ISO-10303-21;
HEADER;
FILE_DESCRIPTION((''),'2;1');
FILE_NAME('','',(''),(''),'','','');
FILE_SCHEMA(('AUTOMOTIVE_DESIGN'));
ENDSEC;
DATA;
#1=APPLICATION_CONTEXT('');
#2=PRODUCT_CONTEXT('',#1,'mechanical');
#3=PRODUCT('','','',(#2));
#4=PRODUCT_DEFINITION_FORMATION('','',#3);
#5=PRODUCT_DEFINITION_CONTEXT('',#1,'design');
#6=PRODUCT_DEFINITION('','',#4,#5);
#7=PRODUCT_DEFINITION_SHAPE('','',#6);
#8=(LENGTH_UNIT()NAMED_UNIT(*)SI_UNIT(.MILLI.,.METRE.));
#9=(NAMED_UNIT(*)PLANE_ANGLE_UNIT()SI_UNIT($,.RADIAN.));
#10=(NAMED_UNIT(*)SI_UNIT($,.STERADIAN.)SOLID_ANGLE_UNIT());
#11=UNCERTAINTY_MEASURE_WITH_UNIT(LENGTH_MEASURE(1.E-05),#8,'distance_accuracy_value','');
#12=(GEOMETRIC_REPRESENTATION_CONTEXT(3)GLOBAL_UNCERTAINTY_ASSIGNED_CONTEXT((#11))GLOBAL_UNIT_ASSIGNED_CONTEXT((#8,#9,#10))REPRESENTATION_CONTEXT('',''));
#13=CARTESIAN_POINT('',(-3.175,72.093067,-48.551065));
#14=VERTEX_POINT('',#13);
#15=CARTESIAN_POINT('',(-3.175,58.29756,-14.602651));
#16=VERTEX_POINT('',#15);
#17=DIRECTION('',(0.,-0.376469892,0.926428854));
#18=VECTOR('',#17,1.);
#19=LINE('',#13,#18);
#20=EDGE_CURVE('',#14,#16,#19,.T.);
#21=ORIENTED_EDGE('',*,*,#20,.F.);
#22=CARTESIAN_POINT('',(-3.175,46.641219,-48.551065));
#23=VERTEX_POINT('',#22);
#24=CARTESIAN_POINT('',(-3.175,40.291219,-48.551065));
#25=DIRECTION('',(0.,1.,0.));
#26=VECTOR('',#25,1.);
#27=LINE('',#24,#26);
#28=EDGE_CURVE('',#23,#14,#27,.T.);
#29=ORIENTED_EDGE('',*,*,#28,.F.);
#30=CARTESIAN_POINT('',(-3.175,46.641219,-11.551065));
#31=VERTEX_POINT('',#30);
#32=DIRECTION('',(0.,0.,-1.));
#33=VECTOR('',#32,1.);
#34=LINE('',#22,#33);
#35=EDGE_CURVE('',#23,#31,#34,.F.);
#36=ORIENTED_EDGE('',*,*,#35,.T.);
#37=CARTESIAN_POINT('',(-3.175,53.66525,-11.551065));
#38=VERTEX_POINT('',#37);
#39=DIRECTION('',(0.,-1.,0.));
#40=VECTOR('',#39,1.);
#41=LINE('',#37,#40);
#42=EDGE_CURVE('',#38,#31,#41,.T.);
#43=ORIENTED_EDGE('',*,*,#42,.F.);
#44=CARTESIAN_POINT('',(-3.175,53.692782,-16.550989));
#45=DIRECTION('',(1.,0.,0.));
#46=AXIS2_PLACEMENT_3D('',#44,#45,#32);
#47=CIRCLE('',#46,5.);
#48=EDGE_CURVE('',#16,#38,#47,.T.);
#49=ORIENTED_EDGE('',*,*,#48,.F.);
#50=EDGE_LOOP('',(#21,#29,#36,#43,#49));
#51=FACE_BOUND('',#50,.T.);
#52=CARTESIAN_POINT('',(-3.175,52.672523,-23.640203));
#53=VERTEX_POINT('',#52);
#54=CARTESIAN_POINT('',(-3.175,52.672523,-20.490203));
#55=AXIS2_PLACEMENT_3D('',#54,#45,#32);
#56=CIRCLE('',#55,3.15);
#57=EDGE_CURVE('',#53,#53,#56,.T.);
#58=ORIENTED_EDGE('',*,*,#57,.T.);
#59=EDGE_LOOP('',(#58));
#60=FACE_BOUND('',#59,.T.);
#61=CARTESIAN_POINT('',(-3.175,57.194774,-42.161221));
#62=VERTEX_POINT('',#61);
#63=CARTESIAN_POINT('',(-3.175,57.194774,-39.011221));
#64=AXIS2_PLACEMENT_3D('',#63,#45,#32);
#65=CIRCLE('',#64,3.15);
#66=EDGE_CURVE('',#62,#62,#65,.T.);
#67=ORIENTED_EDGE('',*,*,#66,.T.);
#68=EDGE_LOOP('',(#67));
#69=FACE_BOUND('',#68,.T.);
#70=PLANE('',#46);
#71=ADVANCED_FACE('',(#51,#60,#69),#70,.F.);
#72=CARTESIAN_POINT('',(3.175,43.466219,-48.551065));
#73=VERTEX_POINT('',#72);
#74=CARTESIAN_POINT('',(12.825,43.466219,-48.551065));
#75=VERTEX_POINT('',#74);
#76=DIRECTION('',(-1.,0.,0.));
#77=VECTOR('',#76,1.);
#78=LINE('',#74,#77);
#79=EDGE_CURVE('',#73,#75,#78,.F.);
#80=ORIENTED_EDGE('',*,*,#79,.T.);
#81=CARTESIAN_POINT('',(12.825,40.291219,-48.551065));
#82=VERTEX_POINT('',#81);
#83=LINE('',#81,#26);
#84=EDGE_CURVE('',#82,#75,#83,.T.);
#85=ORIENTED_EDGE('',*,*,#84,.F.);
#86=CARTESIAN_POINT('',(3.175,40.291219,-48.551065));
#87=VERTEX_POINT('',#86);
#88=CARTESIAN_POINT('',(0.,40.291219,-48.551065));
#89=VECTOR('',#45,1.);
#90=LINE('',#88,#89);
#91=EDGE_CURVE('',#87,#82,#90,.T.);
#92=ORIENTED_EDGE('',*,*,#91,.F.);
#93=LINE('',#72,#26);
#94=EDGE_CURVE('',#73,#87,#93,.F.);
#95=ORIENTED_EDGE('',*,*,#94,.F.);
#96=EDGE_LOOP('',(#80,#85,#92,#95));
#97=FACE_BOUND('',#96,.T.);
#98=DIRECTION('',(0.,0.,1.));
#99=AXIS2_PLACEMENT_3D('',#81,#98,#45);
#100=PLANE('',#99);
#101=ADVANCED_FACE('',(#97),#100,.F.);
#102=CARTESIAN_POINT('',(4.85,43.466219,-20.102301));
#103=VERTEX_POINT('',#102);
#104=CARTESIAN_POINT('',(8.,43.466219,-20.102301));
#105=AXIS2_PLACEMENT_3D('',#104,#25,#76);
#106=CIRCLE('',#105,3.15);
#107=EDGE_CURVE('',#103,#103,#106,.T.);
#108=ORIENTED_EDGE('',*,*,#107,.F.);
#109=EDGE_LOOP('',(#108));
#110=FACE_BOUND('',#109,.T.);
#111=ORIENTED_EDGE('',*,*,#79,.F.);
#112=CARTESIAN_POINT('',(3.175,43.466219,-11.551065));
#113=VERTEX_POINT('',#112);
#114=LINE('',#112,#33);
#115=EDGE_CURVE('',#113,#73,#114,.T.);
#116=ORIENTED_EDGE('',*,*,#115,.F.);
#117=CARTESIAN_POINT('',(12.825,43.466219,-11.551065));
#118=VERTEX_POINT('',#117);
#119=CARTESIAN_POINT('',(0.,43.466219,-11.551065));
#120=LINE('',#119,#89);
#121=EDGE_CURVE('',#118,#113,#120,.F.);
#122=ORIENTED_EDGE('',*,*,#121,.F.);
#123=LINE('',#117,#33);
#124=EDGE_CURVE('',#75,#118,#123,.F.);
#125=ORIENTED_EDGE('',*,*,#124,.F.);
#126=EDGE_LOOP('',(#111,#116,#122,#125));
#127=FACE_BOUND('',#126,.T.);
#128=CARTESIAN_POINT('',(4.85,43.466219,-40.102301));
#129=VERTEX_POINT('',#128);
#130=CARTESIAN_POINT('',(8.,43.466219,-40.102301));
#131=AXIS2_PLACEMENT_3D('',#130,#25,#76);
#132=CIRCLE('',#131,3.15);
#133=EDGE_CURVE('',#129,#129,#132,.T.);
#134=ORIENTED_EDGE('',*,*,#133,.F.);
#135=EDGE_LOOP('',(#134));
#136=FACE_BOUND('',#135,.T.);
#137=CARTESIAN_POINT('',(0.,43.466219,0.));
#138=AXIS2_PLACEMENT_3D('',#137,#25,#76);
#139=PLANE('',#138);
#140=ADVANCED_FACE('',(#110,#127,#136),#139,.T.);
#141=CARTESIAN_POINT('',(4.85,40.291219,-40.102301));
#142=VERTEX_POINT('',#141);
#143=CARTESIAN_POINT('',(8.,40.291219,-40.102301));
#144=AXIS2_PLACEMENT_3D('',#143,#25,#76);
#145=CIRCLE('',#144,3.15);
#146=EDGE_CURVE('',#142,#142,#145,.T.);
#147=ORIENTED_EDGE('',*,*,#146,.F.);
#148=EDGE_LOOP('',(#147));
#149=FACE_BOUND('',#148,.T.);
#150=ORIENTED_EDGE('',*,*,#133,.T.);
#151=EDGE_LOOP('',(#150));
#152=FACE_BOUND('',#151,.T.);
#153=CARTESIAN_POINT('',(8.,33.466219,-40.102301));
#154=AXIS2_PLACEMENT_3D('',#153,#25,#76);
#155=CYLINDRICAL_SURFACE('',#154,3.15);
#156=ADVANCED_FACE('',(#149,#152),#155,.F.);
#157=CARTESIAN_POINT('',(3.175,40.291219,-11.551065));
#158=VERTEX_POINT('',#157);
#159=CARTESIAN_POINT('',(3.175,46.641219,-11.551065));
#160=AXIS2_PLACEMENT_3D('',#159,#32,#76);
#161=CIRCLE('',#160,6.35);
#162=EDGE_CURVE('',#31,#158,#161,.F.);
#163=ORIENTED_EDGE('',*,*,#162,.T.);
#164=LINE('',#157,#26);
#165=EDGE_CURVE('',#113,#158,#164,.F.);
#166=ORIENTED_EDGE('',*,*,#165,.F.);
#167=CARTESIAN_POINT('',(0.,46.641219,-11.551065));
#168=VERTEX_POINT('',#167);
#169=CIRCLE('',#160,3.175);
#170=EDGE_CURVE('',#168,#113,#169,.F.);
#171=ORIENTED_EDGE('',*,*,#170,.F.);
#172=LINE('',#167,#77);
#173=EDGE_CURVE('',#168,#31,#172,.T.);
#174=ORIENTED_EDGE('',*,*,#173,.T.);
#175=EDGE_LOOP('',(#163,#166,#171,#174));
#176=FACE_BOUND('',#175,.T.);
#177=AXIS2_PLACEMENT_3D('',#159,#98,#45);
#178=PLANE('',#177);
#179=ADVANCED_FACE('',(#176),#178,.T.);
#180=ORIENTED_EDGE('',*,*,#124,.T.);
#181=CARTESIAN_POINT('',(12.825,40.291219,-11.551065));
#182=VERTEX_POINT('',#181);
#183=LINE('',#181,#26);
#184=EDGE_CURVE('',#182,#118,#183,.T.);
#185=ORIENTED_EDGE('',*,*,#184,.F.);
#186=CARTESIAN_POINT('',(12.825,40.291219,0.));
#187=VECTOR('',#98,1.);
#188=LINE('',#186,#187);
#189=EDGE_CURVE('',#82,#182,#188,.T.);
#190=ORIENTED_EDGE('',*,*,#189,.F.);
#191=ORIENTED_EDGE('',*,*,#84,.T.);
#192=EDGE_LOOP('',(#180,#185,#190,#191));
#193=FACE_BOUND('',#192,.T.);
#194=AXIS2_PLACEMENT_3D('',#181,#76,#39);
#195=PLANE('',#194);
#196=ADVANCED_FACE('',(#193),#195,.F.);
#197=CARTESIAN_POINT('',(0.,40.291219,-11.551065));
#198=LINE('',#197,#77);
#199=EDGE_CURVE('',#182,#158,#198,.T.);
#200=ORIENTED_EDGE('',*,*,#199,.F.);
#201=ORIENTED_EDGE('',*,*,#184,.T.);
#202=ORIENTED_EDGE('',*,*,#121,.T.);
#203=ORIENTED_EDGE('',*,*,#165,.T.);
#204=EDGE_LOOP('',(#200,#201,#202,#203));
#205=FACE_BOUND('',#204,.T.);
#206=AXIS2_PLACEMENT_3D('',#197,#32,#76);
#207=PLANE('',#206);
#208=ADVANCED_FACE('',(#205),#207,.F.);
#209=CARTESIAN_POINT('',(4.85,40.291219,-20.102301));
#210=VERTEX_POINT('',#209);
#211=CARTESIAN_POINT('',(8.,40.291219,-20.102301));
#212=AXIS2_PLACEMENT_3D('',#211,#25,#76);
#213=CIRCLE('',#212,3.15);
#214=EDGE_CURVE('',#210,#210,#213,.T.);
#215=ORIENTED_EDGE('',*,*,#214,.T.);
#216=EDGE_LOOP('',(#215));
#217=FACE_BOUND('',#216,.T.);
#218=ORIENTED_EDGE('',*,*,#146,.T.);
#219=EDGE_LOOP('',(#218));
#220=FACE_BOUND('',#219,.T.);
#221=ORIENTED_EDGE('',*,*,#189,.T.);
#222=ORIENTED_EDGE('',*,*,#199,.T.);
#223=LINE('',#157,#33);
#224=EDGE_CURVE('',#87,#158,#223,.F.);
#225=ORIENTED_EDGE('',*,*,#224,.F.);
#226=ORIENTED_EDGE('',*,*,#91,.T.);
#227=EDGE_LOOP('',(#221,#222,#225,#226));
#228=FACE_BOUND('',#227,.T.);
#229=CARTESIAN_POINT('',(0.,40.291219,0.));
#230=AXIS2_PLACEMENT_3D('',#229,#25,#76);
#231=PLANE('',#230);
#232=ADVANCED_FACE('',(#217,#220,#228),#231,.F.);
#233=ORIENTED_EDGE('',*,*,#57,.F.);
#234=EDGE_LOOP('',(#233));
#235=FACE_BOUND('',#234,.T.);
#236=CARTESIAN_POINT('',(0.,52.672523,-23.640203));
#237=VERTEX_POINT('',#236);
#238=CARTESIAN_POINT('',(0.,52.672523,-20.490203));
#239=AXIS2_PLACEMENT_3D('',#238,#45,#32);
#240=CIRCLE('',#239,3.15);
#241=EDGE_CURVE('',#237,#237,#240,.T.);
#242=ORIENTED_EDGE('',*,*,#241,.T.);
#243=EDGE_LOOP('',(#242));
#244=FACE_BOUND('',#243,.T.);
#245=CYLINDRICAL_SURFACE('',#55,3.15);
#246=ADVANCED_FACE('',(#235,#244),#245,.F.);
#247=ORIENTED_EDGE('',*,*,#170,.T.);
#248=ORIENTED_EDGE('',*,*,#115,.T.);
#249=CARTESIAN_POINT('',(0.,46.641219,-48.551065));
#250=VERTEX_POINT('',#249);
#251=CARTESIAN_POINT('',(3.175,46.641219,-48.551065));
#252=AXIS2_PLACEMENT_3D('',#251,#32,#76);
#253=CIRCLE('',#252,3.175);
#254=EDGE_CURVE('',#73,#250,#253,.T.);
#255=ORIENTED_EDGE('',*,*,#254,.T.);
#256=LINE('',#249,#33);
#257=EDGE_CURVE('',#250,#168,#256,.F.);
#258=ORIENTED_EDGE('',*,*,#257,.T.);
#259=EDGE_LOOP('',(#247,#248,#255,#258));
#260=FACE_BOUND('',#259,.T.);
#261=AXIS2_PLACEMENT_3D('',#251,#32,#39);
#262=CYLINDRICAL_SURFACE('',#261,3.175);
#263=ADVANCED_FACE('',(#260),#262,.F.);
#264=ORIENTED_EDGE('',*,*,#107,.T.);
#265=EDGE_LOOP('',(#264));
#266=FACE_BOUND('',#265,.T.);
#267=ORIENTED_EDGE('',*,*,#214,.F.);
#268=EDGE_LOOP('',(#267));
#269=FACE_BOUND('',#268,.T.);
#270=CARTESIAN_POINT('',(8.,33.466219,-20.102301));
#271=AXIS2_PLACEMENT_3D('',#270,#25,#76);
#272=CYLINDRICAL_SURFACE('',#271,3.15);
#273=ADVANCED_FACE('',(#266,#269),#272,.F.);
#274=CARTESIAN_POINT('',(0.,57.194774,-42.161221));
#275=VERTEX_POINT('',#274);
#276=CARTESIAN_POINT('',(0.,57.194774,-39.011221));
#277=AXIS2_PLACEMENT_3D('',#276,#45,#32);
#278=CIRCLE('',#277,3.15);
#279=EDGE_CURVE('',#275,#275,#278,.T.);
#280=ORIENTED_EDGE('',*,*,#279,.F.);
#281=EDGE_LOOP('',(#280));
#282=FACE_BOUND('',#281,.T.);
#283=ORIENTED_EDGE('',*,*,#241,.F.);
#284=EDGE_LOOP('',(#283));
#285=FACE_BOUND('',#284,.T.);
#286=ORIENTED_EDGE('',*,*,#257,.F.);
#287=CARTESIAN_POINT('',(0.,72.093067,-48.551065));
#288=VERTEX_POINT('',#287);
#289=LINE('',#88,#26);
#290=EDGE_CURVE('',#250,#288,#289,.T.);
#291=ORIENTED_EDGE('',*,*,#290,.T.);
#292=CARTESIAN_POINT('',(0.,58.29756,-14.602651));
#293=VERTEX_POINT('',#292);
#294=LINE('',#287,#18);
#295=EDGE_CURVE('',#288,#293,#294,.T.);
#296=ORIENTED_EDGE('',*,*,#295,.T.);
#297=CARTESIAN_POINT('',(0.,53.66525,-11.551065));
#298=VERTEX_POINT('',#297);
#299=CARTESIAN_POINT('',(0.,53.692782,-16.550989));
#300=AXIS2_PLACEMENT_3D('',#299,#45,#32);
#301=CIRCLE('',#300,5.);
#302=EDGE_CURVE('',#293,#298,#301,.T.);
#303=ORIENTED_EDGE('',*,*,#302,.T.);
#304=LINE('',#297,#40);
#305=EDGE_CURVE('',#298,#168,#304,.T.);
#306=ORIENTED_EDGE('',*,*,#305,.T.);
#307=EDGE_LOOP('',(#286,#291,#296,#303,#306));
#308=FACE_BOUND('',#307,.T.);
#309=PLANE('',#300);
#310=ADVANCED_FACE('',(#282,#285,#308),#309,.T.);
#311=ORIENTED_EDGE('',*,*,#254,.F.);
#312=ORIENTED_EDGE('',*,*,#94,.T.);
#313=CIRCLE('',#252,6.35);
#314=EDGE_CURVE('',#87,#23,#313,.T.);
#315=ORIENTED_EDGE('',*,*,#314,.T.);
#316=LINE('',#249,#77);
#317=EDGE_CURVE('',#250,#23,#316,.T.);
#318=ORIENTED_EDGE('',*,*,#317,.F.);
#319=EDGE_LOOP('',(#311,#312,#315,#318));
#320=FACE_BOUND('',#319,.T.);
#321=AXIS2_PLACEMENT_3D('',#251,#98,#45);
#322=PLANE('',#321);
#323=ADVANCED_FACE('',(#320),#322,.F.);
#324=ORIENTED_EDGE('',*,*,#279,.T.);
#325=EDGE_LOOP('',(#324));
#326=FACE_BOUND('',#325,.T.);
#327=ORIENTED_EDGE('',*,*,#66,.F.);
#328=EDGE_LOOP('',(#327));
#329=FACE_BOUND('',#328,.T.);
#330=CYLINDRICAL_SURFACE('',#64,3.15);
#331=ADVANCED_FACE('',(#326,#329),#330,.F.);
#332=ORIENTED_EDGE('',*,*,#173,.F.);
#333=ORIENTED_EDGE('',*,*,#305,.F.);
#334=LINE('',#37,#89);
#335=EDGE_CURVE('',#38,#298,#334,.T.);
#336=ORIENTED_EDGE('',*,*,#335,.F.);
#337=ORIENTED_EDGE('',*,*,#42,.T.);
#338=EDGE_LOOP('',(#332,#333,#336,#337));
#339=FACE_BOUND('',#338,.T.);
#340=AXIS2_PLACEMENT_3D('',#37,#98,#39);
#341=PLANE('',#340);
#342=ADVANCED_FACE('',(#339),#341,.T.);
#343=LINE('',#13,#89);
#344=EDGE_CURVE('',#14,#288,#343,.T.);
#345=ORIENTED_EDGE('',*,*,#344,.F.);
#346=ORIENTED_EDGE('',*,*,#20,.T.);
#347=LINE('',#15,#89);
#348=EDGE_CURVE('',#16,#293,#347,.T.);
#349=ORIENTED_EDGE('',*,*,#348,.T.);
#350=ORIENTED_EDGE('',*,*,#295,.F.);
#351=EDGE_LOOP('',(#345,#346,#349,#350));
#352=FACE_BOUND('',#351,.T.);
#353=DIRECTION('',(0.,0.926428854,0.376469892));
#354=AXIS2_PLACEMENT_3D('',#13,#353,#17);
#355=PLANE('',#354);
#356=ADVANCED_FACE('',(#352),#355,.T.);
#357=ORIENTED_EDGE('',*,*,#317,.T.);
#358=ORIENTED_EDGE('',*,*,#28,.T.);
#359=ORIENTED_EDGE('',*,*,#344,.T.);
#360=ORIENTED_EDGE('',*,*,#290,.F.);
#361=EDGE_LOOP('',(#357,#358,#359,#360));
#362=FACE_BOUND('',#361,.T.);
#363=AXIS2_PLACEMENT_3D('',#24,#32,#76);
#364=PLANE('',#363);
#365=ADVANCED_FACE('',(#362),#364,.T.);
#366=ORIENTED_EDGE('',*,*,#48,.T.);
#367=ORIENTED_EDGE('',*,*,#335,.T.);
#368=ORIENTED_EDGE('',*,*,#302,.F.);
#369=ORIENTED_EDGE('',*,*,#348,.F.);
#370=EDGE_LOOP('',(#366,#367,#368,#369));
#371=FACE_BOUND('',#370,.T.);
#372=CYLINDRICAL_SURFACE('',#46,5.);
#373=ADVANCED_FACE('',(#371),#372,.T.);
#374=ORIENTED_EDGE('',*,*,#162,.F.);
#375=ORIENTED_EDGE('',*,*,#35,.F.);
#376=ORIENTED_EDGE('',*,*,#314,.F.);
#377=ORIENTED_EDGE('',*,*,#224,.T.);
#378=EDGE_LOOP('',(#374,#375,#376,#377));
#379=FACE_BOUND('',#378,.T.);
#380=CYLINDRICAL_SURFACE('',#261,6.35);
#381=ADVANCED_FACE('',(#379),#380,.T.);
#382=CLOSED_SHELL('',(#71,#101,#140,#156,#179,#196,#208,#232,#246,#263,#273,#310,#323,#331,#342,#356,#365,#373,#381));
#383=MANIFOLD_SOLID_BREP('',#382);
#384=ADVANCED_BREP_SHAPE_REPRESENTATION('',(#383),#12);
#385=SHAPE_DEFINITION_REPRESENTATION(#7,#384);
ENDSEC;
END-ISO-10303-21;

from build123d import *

# Parameters (mm, degrees)
SKETCH2_R                    = 3.15
BASE_FLANGE1_DEPTH           = 3.175
EDGE_FLANGE1_STRIP_W         = 19.05
EDGE_FLANGE1_STRIP_H         = 3.175
EDGE_FLANGE1_STRIP_CUT_DEPTH = 37
EDGE_FLANGE1_DEPTH           = 37
SKETCH10_R                   = 3.15
CUT_EXTRUDE1_DEPTH           = 10


# Sheet-metal steps are written as plain solids
with BuildPart() as part:
    # Sketch2 → Base-Flange1 (new body)
    with BuildSketch(Plane(origin=(0, 0, 0), x_dir=(0, 0, -1), z_dir=(1, 0, 0))):
        with BuildLine():
            Line((48.551064785, 40.291218586), (48.551064785, 72.093066751))
            Line((48.551064785, 72.093066751), (14.602650648, 58.297559694))
            ThreePointArc((14.602650648, 58.297559694), (12.37556545, 56.443388888), (11.551064785, 53.665249851))
            Line((11.551064785, 53.665249851), (11.551064785, 40.291218586))
            Line((11.551064785, 40.291218586), (48.551064785, 40.291218586))
        make_face()
        with Locations((39.011220588, 57.194773579)):
            Circle(SKETCH2_R, mode=Mode.SUBTRACT)
        with Locations((20.490203266, 52.672523101)):
            Circle(SKETCH2_R, mode=Mode.SUBTRACT)
    extrude(amount=-BASE_FLANGE1_DEPTH)

    # Edge-Flange1 strip (across the edge) → Edge-Flange1 strip cut (cut)
    with BuildSketch(Plane(origin=(0, 40.291218586, -11.551064785), x_dir=(0, 1, 0), z_dir=(0, 0, -1))):
        with Locations((-3.175, -1.5875)):
            Rectangle(EDGE_FLANGE1_STRIP_W, EDGE_FLANGE1_STRIP_H)
    extrude(amount=EDGE_FLANGE1_STRIP_CUT_DEPTH, mode=Mode.SUBTRACT)

    # Edge-Flange1 section (across the edge) → Edge-Flange1 (add)
    with BuildSketch(Plane(origin=(0, 40.291218586, -11.551064785), x_dir=(0, 1, 0), z_dir=(0, 0, -1))):
        with BuildLine():
            Line((0, 3.175), (0, 12.825))
            Line((0, 12.825), (3.175, 12.825))
            Line((3.175, 12.825), (3.175, 3.175))
            ThreePointArc((3.175, 3.175), (4.10493597, 0.92993597), (6.35, 0))
            Line((6.35, 0), (6.35, -3.175))
            ThreePointArc((6.35, -3.175), (1.859871939, -1.315128061), (0, 3.175))
        make_face()
    extrude(amount=EDGE_FLANGE1_DEPTH)

    # Sketch10 → Cut-Extrude1 (cut)
    with BuildSketch(Plane(origin=(0, 43.466218586, 0), x_dir=(1, 0, 0), z_dir=(0, 1, 0))):
        with Locations(Location((8, 40.102300831, 0), (0, 0, 180))):
            Circle(SKETCH10_R)
        with Locations(Location((8, 20.102300831, 0), (0, 0, 180))):
            Circle(SKETCH10_R)
    extrude(amount=-CUT_EXTRUDE1_DEPTH, mode=Mode.SUBTRACT)


solid = part.part
